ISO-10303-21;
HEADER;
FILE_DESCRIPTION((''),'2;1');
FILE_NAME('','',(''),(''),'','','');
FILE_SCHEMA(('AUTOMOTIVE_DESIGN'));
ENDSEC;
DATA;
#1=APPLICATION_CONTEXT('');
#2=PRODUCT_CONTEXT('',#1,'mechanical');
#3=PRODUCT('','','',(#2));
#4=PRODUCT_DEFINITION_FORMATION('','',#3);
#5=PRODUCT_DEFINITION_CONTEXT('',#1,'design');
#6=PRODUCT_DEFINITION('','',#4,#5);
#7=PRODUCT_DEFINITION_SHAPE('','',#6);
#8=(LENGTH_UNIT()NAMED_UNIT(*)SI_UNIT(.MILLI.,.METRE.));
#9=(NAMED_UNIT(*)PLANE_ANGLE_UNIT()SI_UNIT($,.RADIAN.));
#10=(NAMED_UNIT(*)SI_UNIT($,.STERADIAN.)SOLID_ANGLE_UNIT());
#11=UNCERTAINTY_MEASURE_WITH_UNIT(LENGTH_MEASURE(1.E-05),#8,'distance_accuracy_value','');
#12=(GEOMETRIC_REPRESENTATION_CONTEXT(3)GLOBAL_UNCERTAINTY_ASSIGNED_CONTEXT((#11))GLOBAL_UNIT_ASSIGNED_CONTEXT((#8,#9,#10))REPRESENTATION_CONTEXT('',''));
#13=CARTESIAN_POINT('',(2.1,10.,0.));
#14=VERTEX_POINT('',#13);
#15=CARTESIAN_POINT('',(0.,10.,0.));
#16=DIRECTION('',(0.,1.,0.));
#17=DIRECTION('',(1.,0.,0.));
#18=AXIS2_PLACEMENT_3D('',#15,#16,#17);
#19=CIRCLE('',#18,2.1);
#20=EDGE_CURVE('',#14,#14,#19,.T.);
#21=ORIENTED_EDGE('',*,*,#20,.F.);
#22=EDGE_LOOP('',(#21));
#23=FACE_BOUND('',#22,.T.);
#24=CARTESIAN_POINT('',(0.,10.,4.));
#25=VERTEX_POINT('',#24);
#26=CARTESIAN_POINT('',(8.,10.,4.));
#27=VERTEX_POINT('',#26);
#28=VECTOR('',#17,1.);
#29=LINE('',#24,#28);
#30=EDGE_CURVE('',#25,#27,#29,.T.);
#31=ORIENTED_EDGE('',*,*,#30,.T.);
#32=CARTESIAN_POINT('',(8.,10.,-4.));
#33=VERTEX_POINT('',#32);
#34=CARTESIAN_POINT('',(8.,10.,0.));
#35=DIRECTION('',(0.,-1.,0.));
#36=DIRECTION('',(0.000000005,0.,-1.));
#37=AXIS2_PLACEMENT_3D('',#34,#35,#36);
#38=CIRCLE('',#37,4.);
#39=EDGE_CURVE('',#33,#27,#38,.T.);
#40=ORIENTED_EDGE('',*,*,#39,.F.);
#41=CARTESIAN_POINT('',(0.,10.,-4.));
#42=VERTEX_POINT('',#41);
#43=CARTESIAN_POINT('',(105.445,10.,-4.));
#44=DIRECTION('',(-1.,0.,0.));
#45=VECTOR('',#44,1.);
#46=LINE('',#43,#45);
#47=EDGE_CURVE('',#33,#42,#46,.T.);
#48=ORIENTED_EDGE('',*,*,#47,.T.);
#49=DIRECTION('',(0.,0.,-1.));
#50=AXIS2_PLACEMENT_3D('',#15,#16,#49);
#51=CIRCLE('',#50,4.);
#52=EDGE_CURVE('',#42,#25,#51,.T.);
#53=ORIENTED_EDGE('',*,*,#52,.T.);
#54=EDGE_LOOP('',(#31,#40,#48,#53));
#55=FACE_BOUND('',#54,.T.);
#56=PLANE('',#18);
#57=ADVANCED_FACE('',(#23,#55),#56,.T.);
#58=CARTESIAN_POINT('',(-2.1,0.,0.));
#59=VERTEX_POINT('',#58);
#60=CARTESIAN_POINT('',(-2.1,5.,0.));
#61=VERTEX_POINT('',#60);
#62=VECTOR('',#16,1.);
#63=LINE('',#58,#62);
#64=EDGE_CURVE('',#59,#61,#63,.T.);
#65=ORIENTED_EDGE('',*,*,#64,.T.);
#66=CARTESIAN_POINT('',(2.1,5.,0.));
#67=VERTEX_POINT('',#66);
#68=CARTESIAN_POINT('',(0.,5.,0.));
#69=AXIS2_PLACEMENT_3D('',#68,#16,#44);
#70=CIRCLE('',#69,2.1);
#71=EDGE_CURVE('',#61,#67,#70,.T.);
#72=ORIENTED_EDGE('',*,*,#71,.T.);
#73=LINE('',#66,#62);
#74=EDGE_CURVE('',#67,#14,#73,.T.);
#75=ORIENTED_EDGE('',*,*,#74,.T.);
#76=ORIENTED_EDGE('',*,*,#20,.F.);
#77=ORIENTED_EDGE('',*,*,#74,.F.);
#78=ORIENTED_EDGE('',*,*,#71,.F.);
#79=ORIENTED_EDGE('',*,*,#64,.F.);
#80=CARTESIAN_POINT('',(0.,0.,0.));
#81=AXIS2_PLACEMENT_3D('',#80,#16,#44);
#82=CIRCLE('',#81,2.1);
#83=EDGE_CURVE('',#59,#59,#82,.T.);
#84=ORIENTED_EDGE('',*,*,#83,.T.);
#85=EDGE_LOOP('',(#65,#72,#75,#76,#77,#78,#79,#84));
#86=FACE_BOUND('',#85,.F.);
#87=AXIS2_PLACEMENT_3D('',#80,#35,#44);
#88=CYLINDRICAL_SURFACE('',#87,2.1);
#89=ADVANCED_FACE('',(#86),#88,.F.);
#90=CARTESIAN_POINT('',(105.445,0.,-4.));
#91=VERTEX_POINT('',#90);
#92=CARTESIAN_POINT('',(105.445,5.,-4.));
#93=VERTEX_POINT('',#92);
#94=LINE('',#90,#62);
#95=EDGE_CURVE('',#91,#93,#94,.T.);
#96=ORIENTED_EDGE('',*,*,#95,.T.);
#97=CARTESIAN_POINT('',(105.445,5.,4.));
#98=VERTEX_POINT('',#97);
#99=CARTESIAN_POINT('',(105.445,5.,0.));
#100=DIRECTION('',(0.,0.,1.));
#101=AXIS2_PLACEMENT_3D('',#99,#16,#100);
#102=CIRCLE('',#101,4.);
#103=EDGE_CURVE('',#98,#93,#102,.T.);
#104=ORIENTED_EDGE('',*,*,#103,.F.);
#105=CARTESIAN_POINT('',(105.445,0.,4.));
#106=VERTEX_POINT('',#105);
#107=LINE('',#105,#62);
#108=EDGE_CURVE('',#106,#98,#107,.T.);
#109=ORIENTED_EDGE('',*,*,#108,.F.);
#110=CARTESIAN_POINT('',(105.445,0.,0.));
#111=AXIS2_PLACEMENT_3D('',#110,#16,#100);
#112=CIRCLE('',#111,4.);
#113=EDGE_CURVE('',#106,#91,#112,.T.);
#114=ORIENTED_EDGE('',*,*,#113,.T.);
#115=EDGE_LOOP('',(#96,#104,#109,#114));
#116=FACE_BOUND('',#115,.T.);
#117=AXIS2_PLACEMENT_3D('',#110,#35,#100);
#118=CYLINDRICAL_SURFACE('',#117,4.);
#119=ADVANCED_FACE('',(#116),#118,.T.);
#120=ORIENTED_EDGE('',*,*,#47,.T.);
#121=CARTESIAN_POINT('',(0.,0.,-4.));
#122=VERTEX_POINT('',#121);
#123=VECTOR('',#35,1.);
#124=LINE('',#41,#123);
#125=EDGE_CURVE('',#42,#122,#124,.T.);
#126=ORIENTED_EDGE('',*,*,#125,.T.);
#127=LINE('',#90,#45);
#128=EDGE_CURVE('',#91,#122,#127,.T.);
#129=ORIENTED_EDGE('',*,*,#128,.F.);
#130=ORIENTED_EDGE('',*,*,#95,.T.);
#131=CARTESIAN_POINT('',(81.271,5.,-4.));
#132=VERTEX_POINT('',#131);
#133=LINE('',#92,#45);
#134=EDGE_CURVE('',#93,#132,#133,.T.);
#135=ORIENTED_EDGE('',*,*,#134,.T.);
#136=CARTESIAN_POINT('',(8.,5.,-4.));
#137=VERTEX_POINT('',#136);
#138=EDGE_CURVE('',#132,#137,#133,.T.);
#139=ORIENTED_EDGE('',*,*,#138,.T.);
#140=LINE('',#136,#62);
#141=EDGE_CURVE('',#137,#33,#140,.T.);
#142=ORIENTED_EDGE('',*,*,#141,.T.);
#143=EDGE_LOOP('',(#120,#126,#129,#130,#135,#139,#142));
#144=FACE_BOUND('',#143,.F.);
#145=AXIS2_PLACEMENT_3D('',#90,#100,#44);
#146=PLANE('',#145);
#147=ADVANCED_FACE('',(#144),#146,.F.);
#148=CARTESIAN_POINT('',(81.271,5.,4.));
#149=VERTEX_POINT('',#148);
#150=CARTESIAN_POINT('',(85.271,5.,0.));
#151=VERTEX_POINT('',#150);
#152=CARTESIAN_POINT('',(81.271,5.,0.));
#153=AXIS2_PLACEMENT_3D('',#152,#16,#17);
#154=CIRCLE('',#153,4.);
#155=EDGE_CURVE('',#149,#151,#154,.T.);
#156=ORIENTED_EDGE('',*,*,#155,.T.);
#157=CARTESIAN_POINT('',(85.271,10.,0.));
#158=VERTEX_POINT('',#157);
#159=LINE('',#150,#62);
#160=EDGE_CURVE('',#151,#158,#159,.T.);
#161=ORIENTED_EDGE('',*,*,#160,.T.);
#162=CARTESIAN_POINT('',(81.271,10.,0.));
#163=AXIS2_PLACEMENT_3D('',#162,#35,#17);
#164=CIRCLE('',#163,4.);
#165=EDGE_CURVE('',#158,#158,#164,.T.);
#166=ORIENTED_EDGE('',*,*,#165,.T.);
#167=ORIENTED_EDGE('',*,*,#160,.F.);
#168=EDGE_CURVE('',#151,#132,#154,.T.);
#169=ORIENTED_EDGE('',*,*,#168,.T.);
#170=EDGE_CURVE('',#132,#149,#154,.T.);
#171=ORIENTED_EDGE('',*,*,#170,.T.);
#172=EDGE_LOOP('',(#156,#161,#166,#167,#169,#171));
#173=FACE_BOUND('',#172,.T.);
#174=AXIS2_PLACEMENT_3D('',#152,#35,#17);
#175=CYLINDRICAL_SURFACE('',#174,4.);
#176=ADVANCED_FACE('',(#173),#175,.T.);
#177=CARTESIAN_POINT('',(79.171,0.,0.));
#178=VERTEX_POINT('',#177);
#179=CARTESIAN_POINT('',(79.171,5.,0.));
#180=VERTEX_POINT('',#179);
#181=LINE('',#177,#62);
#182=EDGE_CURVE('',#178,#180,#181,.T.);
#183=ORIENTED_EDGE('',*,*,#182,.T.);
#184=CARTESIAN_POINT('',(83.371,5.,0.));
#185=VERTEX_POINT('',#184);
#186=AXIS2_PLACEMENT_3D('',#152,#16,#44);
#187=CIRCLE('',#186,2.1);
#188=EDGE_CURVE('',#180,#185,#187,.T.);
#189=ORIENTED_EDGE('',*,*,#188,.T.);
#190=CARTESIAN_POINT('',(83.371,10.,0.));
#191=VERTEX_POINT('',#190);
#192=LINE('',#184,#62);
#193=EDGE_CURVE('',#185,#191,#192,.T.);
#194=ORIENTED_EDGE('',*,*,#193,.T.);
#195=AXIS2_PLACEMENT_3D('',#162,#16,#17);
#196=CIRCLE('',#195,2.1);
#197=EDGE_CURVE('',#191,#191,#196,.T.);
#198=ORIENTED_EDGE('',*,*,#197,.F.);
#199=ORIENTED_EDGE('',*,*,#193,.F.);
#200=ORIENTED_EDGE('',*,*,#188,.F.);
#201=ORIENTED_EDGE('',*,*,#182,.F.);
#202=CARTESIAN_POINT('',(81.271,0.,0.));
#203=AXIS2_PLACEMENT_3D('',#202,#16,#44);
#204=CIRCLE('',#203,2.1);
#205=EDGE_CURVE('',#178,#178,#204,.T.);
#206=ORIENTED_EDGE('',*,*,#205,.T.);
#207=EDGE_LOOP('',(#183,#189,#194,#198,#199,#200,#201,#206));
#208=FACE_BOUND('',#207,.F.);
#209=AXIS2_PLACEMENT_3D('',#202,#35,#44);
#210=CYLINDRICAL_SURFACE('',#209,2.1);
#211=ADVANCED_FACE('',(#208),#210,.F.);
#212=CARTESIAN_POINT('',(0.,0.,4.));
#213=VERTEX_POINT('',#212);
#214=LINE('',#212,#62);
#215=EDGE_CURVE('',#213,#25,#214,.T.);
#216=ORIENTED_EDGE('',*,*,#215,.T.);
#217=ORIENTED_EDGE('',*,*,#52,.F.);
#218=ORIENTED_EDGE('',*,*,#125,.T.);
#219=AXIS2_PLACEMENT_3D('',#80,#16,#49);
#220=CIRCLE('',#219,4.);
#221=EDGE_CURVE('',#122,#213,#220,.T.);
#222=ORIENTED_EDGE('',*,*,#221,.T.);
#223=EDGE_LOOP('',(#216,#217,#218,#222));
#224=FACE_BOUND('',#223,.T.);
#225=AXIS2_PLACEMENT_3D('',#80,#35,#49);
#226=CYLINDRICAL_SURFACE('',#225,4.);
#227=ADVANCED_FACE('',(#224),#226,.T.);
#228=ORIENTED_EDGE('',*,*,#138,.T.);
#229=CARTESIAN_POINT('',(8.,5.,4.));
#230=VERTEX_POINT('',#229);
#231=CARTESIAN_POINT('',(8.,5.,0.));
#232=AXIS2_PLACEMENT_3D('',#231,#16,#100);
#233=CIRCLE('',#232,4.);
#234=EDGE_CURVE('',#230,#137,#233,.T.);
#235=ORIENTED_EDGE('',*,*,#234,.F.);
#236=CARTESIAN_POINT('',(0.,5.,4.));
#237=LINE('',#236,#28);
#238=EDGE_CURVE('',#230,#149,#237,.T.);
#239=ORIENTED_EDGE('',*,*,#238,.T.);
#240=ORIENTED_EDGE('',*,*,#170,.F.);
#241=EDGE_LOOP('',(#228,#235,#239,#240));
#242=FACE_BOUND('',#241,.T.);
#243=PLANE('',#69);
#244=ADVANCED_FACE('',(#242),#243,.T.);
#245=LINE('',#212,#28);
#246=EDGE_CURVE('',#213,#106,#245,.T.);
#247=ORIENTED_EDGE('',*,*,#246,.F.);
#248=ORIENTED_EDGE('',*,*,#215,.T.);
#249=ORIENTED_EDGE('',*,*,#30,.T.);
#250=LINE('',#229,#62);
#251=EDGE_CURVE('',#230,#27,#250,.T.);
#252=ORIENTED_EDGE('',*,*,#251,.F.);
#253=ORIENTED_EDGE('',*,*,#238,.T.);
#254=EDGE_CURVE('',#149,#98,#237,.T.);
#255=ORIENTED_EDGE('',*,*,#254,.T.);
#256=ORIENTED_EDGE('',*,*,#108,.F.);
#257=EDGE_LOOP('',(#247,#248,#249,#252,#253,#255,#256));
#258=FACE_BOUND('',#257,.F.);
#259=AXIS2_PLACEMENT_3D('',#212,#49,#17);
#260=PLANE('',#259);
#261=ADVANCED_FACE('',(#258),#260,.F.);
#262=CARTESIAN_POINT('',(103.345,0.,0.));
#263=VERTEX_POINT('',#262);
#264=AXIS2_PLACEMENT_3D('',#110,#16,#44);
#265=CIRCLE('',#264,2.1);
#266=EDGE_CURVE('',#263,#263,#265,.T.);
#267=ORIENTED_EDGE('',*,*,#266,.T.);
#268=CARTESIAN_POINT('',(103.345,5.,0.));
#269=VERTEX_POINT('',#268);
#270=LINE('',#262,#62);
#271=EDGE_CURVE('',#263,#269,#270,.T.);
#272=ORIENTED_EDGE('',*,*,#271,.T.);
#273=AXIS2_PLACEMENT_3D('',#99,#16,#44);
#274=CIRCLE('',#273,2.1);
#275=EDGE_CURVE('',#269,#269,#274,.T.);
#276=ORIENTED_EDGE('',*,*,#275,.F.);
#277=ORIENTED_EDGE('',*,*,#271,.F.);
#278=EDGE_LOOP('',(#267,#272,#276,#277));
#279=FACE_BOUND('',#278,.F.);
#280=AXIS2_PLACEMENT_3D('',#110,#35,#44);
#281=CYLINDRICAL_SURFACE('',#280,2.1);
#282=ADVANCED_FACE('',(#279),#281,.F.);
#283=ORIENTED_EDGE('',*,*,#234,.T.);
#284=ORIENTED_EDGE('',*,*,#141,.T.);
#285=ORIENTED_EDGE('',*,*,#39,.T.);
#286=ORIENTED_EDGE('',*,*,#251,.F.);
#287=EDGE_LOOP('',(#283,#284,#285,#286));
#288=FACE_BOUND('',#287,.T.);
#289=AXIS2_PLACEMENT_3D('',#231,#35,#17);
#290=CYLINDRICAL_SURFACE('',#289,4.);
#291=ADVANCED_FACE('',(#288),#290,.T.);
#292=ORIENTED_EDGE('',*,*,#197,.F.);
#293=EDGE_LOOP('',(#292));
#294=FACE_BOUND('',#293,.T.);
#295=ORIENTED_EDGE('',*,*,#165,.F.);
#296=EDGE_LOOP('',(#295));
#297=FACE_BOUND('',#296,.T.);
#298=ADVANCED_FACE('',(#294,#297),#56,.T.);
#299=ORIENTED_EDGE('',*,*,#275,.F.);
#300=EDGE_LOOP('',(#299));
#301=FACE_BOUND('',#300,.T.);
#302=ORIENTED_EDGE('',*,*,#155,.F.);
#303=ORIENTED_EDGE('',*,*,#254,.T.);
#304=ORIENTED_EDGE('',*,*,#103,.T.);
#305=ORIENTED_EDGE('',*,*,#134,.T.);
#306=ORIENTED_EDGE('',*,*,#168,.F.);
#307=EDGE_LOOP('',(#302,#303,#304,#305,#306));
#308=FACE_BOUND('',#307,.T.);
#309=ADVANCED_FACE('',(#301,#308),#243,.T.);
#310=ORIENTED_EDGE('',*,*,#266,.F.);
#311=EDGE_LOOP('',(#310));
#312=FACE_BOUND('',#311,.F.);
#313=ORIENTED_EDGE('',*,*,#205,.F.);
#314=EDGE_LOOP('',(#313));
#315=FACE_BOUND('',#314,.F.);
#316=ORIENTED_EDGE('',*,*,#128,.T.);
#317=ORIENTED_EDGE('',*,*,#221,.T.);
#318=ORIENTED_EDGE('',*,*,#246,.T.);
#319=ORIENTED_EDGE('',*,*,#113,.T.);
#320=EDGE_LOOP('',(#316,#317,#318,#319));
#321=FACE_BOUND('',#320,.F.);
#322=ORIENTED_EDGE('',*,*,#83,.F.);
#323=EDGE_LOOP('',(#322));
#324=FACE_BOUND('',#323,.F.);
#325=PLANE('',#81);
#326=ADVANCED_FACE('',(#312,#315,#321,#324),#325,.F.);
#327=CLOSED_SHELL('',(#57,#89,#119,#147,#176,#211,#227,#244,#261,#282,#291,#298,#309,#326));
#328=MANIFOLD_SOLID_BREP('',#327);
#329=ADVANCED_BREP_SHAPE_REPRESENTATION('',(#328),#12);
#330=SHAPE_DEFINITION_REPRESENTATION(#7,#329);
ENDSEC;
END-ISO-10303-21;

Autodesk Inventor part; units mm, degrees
ref_plane "YZ Plane" through (0, 0, 0) normal (1, 0, 0) x (0, 1, 0)
ref_plane "XZ Plane" through (0, 0, 0) normal (0, 1, 0) x (-1, 0, 0)
ref_plane "XY Plane" through (0, 0, 0) normal (0, 0, 1) x (1, 0, 0)
sketch "Sketch1" plane through (0, 0, 0) normal (0, 1, 0) x (-1, 0, 0)
  line L0 (0, 0) -> (-105.445, 0) construction
  line L1 (0, 4) -> (-105.445, 4)
  line L2 (-105.445, -4) -> (0, -4)
  arc A0 (0, -4) -> (0, 4) centre (0, 0) ccw
  arc A1 (-105.445, 4) -> (-105.445, -4) centre (-105.445, 0) ccw
  circle A2 centre (0, 0) radius 2.1
  circle A3 centre (-81.271, 0) radius 2.1
  circle A4 centre (-105.445, 0) radius 2.1
  point P0 (-52.7225, 0)
  point P1 (-52.7225, 0)
  dimension "d0" = 105.445
  dimension "d1" = 8
  dimension "d2" = 4.2
  dimension "d8" = 4.2
  dimension "d9" = 81.271
  dimension "d10" = 4.2
extrude "Extrusion1" add sketch "Sketch1" along normal blind 5
sketch "Sketch2" plane through (0, 5, 0) normal (0, 1, 0) x (1, 0, 0)
  arc A0 (105.445, -4) -> (105.445, 4) centre (105.445, 0) ccw projected
  line L0 (105.445, 4) -> (0, 4) projected
  arc A1 (0, 4) -> (0, -4) centre (0, 0) ccw projected
  line L1 (0, -4) -> (105.445, -4) projected
  circle A2 centre (81.271, 0) radius 2.1 projected
  circle A3 centre (105.445, 0) radius 2.1 projected
  circle A4 centre (0, 0) radius 2.1 projected
  circle A5 centre (8, 0) radius 4
  line L2 (0, -4) -> (105.445, -4) projected
  circle A6 centre (97.445, 0) radius 4
  circle A7 centre (81.271, 0) radius 4
  point P0 (97.445, -4)
  point P1 (97.445, 4)
  point P2 (8, -4)
  point P3 (8, 4)
  dimension "d11" = 8
  dimension "d12" = 8
  dimension "d13" = 8
  dimension "d28" = 8
extrude "Extrusion7" add sketch "Sketch2" along normal blind 5 contours A7 | L1 A1 L0 A5 | A5
